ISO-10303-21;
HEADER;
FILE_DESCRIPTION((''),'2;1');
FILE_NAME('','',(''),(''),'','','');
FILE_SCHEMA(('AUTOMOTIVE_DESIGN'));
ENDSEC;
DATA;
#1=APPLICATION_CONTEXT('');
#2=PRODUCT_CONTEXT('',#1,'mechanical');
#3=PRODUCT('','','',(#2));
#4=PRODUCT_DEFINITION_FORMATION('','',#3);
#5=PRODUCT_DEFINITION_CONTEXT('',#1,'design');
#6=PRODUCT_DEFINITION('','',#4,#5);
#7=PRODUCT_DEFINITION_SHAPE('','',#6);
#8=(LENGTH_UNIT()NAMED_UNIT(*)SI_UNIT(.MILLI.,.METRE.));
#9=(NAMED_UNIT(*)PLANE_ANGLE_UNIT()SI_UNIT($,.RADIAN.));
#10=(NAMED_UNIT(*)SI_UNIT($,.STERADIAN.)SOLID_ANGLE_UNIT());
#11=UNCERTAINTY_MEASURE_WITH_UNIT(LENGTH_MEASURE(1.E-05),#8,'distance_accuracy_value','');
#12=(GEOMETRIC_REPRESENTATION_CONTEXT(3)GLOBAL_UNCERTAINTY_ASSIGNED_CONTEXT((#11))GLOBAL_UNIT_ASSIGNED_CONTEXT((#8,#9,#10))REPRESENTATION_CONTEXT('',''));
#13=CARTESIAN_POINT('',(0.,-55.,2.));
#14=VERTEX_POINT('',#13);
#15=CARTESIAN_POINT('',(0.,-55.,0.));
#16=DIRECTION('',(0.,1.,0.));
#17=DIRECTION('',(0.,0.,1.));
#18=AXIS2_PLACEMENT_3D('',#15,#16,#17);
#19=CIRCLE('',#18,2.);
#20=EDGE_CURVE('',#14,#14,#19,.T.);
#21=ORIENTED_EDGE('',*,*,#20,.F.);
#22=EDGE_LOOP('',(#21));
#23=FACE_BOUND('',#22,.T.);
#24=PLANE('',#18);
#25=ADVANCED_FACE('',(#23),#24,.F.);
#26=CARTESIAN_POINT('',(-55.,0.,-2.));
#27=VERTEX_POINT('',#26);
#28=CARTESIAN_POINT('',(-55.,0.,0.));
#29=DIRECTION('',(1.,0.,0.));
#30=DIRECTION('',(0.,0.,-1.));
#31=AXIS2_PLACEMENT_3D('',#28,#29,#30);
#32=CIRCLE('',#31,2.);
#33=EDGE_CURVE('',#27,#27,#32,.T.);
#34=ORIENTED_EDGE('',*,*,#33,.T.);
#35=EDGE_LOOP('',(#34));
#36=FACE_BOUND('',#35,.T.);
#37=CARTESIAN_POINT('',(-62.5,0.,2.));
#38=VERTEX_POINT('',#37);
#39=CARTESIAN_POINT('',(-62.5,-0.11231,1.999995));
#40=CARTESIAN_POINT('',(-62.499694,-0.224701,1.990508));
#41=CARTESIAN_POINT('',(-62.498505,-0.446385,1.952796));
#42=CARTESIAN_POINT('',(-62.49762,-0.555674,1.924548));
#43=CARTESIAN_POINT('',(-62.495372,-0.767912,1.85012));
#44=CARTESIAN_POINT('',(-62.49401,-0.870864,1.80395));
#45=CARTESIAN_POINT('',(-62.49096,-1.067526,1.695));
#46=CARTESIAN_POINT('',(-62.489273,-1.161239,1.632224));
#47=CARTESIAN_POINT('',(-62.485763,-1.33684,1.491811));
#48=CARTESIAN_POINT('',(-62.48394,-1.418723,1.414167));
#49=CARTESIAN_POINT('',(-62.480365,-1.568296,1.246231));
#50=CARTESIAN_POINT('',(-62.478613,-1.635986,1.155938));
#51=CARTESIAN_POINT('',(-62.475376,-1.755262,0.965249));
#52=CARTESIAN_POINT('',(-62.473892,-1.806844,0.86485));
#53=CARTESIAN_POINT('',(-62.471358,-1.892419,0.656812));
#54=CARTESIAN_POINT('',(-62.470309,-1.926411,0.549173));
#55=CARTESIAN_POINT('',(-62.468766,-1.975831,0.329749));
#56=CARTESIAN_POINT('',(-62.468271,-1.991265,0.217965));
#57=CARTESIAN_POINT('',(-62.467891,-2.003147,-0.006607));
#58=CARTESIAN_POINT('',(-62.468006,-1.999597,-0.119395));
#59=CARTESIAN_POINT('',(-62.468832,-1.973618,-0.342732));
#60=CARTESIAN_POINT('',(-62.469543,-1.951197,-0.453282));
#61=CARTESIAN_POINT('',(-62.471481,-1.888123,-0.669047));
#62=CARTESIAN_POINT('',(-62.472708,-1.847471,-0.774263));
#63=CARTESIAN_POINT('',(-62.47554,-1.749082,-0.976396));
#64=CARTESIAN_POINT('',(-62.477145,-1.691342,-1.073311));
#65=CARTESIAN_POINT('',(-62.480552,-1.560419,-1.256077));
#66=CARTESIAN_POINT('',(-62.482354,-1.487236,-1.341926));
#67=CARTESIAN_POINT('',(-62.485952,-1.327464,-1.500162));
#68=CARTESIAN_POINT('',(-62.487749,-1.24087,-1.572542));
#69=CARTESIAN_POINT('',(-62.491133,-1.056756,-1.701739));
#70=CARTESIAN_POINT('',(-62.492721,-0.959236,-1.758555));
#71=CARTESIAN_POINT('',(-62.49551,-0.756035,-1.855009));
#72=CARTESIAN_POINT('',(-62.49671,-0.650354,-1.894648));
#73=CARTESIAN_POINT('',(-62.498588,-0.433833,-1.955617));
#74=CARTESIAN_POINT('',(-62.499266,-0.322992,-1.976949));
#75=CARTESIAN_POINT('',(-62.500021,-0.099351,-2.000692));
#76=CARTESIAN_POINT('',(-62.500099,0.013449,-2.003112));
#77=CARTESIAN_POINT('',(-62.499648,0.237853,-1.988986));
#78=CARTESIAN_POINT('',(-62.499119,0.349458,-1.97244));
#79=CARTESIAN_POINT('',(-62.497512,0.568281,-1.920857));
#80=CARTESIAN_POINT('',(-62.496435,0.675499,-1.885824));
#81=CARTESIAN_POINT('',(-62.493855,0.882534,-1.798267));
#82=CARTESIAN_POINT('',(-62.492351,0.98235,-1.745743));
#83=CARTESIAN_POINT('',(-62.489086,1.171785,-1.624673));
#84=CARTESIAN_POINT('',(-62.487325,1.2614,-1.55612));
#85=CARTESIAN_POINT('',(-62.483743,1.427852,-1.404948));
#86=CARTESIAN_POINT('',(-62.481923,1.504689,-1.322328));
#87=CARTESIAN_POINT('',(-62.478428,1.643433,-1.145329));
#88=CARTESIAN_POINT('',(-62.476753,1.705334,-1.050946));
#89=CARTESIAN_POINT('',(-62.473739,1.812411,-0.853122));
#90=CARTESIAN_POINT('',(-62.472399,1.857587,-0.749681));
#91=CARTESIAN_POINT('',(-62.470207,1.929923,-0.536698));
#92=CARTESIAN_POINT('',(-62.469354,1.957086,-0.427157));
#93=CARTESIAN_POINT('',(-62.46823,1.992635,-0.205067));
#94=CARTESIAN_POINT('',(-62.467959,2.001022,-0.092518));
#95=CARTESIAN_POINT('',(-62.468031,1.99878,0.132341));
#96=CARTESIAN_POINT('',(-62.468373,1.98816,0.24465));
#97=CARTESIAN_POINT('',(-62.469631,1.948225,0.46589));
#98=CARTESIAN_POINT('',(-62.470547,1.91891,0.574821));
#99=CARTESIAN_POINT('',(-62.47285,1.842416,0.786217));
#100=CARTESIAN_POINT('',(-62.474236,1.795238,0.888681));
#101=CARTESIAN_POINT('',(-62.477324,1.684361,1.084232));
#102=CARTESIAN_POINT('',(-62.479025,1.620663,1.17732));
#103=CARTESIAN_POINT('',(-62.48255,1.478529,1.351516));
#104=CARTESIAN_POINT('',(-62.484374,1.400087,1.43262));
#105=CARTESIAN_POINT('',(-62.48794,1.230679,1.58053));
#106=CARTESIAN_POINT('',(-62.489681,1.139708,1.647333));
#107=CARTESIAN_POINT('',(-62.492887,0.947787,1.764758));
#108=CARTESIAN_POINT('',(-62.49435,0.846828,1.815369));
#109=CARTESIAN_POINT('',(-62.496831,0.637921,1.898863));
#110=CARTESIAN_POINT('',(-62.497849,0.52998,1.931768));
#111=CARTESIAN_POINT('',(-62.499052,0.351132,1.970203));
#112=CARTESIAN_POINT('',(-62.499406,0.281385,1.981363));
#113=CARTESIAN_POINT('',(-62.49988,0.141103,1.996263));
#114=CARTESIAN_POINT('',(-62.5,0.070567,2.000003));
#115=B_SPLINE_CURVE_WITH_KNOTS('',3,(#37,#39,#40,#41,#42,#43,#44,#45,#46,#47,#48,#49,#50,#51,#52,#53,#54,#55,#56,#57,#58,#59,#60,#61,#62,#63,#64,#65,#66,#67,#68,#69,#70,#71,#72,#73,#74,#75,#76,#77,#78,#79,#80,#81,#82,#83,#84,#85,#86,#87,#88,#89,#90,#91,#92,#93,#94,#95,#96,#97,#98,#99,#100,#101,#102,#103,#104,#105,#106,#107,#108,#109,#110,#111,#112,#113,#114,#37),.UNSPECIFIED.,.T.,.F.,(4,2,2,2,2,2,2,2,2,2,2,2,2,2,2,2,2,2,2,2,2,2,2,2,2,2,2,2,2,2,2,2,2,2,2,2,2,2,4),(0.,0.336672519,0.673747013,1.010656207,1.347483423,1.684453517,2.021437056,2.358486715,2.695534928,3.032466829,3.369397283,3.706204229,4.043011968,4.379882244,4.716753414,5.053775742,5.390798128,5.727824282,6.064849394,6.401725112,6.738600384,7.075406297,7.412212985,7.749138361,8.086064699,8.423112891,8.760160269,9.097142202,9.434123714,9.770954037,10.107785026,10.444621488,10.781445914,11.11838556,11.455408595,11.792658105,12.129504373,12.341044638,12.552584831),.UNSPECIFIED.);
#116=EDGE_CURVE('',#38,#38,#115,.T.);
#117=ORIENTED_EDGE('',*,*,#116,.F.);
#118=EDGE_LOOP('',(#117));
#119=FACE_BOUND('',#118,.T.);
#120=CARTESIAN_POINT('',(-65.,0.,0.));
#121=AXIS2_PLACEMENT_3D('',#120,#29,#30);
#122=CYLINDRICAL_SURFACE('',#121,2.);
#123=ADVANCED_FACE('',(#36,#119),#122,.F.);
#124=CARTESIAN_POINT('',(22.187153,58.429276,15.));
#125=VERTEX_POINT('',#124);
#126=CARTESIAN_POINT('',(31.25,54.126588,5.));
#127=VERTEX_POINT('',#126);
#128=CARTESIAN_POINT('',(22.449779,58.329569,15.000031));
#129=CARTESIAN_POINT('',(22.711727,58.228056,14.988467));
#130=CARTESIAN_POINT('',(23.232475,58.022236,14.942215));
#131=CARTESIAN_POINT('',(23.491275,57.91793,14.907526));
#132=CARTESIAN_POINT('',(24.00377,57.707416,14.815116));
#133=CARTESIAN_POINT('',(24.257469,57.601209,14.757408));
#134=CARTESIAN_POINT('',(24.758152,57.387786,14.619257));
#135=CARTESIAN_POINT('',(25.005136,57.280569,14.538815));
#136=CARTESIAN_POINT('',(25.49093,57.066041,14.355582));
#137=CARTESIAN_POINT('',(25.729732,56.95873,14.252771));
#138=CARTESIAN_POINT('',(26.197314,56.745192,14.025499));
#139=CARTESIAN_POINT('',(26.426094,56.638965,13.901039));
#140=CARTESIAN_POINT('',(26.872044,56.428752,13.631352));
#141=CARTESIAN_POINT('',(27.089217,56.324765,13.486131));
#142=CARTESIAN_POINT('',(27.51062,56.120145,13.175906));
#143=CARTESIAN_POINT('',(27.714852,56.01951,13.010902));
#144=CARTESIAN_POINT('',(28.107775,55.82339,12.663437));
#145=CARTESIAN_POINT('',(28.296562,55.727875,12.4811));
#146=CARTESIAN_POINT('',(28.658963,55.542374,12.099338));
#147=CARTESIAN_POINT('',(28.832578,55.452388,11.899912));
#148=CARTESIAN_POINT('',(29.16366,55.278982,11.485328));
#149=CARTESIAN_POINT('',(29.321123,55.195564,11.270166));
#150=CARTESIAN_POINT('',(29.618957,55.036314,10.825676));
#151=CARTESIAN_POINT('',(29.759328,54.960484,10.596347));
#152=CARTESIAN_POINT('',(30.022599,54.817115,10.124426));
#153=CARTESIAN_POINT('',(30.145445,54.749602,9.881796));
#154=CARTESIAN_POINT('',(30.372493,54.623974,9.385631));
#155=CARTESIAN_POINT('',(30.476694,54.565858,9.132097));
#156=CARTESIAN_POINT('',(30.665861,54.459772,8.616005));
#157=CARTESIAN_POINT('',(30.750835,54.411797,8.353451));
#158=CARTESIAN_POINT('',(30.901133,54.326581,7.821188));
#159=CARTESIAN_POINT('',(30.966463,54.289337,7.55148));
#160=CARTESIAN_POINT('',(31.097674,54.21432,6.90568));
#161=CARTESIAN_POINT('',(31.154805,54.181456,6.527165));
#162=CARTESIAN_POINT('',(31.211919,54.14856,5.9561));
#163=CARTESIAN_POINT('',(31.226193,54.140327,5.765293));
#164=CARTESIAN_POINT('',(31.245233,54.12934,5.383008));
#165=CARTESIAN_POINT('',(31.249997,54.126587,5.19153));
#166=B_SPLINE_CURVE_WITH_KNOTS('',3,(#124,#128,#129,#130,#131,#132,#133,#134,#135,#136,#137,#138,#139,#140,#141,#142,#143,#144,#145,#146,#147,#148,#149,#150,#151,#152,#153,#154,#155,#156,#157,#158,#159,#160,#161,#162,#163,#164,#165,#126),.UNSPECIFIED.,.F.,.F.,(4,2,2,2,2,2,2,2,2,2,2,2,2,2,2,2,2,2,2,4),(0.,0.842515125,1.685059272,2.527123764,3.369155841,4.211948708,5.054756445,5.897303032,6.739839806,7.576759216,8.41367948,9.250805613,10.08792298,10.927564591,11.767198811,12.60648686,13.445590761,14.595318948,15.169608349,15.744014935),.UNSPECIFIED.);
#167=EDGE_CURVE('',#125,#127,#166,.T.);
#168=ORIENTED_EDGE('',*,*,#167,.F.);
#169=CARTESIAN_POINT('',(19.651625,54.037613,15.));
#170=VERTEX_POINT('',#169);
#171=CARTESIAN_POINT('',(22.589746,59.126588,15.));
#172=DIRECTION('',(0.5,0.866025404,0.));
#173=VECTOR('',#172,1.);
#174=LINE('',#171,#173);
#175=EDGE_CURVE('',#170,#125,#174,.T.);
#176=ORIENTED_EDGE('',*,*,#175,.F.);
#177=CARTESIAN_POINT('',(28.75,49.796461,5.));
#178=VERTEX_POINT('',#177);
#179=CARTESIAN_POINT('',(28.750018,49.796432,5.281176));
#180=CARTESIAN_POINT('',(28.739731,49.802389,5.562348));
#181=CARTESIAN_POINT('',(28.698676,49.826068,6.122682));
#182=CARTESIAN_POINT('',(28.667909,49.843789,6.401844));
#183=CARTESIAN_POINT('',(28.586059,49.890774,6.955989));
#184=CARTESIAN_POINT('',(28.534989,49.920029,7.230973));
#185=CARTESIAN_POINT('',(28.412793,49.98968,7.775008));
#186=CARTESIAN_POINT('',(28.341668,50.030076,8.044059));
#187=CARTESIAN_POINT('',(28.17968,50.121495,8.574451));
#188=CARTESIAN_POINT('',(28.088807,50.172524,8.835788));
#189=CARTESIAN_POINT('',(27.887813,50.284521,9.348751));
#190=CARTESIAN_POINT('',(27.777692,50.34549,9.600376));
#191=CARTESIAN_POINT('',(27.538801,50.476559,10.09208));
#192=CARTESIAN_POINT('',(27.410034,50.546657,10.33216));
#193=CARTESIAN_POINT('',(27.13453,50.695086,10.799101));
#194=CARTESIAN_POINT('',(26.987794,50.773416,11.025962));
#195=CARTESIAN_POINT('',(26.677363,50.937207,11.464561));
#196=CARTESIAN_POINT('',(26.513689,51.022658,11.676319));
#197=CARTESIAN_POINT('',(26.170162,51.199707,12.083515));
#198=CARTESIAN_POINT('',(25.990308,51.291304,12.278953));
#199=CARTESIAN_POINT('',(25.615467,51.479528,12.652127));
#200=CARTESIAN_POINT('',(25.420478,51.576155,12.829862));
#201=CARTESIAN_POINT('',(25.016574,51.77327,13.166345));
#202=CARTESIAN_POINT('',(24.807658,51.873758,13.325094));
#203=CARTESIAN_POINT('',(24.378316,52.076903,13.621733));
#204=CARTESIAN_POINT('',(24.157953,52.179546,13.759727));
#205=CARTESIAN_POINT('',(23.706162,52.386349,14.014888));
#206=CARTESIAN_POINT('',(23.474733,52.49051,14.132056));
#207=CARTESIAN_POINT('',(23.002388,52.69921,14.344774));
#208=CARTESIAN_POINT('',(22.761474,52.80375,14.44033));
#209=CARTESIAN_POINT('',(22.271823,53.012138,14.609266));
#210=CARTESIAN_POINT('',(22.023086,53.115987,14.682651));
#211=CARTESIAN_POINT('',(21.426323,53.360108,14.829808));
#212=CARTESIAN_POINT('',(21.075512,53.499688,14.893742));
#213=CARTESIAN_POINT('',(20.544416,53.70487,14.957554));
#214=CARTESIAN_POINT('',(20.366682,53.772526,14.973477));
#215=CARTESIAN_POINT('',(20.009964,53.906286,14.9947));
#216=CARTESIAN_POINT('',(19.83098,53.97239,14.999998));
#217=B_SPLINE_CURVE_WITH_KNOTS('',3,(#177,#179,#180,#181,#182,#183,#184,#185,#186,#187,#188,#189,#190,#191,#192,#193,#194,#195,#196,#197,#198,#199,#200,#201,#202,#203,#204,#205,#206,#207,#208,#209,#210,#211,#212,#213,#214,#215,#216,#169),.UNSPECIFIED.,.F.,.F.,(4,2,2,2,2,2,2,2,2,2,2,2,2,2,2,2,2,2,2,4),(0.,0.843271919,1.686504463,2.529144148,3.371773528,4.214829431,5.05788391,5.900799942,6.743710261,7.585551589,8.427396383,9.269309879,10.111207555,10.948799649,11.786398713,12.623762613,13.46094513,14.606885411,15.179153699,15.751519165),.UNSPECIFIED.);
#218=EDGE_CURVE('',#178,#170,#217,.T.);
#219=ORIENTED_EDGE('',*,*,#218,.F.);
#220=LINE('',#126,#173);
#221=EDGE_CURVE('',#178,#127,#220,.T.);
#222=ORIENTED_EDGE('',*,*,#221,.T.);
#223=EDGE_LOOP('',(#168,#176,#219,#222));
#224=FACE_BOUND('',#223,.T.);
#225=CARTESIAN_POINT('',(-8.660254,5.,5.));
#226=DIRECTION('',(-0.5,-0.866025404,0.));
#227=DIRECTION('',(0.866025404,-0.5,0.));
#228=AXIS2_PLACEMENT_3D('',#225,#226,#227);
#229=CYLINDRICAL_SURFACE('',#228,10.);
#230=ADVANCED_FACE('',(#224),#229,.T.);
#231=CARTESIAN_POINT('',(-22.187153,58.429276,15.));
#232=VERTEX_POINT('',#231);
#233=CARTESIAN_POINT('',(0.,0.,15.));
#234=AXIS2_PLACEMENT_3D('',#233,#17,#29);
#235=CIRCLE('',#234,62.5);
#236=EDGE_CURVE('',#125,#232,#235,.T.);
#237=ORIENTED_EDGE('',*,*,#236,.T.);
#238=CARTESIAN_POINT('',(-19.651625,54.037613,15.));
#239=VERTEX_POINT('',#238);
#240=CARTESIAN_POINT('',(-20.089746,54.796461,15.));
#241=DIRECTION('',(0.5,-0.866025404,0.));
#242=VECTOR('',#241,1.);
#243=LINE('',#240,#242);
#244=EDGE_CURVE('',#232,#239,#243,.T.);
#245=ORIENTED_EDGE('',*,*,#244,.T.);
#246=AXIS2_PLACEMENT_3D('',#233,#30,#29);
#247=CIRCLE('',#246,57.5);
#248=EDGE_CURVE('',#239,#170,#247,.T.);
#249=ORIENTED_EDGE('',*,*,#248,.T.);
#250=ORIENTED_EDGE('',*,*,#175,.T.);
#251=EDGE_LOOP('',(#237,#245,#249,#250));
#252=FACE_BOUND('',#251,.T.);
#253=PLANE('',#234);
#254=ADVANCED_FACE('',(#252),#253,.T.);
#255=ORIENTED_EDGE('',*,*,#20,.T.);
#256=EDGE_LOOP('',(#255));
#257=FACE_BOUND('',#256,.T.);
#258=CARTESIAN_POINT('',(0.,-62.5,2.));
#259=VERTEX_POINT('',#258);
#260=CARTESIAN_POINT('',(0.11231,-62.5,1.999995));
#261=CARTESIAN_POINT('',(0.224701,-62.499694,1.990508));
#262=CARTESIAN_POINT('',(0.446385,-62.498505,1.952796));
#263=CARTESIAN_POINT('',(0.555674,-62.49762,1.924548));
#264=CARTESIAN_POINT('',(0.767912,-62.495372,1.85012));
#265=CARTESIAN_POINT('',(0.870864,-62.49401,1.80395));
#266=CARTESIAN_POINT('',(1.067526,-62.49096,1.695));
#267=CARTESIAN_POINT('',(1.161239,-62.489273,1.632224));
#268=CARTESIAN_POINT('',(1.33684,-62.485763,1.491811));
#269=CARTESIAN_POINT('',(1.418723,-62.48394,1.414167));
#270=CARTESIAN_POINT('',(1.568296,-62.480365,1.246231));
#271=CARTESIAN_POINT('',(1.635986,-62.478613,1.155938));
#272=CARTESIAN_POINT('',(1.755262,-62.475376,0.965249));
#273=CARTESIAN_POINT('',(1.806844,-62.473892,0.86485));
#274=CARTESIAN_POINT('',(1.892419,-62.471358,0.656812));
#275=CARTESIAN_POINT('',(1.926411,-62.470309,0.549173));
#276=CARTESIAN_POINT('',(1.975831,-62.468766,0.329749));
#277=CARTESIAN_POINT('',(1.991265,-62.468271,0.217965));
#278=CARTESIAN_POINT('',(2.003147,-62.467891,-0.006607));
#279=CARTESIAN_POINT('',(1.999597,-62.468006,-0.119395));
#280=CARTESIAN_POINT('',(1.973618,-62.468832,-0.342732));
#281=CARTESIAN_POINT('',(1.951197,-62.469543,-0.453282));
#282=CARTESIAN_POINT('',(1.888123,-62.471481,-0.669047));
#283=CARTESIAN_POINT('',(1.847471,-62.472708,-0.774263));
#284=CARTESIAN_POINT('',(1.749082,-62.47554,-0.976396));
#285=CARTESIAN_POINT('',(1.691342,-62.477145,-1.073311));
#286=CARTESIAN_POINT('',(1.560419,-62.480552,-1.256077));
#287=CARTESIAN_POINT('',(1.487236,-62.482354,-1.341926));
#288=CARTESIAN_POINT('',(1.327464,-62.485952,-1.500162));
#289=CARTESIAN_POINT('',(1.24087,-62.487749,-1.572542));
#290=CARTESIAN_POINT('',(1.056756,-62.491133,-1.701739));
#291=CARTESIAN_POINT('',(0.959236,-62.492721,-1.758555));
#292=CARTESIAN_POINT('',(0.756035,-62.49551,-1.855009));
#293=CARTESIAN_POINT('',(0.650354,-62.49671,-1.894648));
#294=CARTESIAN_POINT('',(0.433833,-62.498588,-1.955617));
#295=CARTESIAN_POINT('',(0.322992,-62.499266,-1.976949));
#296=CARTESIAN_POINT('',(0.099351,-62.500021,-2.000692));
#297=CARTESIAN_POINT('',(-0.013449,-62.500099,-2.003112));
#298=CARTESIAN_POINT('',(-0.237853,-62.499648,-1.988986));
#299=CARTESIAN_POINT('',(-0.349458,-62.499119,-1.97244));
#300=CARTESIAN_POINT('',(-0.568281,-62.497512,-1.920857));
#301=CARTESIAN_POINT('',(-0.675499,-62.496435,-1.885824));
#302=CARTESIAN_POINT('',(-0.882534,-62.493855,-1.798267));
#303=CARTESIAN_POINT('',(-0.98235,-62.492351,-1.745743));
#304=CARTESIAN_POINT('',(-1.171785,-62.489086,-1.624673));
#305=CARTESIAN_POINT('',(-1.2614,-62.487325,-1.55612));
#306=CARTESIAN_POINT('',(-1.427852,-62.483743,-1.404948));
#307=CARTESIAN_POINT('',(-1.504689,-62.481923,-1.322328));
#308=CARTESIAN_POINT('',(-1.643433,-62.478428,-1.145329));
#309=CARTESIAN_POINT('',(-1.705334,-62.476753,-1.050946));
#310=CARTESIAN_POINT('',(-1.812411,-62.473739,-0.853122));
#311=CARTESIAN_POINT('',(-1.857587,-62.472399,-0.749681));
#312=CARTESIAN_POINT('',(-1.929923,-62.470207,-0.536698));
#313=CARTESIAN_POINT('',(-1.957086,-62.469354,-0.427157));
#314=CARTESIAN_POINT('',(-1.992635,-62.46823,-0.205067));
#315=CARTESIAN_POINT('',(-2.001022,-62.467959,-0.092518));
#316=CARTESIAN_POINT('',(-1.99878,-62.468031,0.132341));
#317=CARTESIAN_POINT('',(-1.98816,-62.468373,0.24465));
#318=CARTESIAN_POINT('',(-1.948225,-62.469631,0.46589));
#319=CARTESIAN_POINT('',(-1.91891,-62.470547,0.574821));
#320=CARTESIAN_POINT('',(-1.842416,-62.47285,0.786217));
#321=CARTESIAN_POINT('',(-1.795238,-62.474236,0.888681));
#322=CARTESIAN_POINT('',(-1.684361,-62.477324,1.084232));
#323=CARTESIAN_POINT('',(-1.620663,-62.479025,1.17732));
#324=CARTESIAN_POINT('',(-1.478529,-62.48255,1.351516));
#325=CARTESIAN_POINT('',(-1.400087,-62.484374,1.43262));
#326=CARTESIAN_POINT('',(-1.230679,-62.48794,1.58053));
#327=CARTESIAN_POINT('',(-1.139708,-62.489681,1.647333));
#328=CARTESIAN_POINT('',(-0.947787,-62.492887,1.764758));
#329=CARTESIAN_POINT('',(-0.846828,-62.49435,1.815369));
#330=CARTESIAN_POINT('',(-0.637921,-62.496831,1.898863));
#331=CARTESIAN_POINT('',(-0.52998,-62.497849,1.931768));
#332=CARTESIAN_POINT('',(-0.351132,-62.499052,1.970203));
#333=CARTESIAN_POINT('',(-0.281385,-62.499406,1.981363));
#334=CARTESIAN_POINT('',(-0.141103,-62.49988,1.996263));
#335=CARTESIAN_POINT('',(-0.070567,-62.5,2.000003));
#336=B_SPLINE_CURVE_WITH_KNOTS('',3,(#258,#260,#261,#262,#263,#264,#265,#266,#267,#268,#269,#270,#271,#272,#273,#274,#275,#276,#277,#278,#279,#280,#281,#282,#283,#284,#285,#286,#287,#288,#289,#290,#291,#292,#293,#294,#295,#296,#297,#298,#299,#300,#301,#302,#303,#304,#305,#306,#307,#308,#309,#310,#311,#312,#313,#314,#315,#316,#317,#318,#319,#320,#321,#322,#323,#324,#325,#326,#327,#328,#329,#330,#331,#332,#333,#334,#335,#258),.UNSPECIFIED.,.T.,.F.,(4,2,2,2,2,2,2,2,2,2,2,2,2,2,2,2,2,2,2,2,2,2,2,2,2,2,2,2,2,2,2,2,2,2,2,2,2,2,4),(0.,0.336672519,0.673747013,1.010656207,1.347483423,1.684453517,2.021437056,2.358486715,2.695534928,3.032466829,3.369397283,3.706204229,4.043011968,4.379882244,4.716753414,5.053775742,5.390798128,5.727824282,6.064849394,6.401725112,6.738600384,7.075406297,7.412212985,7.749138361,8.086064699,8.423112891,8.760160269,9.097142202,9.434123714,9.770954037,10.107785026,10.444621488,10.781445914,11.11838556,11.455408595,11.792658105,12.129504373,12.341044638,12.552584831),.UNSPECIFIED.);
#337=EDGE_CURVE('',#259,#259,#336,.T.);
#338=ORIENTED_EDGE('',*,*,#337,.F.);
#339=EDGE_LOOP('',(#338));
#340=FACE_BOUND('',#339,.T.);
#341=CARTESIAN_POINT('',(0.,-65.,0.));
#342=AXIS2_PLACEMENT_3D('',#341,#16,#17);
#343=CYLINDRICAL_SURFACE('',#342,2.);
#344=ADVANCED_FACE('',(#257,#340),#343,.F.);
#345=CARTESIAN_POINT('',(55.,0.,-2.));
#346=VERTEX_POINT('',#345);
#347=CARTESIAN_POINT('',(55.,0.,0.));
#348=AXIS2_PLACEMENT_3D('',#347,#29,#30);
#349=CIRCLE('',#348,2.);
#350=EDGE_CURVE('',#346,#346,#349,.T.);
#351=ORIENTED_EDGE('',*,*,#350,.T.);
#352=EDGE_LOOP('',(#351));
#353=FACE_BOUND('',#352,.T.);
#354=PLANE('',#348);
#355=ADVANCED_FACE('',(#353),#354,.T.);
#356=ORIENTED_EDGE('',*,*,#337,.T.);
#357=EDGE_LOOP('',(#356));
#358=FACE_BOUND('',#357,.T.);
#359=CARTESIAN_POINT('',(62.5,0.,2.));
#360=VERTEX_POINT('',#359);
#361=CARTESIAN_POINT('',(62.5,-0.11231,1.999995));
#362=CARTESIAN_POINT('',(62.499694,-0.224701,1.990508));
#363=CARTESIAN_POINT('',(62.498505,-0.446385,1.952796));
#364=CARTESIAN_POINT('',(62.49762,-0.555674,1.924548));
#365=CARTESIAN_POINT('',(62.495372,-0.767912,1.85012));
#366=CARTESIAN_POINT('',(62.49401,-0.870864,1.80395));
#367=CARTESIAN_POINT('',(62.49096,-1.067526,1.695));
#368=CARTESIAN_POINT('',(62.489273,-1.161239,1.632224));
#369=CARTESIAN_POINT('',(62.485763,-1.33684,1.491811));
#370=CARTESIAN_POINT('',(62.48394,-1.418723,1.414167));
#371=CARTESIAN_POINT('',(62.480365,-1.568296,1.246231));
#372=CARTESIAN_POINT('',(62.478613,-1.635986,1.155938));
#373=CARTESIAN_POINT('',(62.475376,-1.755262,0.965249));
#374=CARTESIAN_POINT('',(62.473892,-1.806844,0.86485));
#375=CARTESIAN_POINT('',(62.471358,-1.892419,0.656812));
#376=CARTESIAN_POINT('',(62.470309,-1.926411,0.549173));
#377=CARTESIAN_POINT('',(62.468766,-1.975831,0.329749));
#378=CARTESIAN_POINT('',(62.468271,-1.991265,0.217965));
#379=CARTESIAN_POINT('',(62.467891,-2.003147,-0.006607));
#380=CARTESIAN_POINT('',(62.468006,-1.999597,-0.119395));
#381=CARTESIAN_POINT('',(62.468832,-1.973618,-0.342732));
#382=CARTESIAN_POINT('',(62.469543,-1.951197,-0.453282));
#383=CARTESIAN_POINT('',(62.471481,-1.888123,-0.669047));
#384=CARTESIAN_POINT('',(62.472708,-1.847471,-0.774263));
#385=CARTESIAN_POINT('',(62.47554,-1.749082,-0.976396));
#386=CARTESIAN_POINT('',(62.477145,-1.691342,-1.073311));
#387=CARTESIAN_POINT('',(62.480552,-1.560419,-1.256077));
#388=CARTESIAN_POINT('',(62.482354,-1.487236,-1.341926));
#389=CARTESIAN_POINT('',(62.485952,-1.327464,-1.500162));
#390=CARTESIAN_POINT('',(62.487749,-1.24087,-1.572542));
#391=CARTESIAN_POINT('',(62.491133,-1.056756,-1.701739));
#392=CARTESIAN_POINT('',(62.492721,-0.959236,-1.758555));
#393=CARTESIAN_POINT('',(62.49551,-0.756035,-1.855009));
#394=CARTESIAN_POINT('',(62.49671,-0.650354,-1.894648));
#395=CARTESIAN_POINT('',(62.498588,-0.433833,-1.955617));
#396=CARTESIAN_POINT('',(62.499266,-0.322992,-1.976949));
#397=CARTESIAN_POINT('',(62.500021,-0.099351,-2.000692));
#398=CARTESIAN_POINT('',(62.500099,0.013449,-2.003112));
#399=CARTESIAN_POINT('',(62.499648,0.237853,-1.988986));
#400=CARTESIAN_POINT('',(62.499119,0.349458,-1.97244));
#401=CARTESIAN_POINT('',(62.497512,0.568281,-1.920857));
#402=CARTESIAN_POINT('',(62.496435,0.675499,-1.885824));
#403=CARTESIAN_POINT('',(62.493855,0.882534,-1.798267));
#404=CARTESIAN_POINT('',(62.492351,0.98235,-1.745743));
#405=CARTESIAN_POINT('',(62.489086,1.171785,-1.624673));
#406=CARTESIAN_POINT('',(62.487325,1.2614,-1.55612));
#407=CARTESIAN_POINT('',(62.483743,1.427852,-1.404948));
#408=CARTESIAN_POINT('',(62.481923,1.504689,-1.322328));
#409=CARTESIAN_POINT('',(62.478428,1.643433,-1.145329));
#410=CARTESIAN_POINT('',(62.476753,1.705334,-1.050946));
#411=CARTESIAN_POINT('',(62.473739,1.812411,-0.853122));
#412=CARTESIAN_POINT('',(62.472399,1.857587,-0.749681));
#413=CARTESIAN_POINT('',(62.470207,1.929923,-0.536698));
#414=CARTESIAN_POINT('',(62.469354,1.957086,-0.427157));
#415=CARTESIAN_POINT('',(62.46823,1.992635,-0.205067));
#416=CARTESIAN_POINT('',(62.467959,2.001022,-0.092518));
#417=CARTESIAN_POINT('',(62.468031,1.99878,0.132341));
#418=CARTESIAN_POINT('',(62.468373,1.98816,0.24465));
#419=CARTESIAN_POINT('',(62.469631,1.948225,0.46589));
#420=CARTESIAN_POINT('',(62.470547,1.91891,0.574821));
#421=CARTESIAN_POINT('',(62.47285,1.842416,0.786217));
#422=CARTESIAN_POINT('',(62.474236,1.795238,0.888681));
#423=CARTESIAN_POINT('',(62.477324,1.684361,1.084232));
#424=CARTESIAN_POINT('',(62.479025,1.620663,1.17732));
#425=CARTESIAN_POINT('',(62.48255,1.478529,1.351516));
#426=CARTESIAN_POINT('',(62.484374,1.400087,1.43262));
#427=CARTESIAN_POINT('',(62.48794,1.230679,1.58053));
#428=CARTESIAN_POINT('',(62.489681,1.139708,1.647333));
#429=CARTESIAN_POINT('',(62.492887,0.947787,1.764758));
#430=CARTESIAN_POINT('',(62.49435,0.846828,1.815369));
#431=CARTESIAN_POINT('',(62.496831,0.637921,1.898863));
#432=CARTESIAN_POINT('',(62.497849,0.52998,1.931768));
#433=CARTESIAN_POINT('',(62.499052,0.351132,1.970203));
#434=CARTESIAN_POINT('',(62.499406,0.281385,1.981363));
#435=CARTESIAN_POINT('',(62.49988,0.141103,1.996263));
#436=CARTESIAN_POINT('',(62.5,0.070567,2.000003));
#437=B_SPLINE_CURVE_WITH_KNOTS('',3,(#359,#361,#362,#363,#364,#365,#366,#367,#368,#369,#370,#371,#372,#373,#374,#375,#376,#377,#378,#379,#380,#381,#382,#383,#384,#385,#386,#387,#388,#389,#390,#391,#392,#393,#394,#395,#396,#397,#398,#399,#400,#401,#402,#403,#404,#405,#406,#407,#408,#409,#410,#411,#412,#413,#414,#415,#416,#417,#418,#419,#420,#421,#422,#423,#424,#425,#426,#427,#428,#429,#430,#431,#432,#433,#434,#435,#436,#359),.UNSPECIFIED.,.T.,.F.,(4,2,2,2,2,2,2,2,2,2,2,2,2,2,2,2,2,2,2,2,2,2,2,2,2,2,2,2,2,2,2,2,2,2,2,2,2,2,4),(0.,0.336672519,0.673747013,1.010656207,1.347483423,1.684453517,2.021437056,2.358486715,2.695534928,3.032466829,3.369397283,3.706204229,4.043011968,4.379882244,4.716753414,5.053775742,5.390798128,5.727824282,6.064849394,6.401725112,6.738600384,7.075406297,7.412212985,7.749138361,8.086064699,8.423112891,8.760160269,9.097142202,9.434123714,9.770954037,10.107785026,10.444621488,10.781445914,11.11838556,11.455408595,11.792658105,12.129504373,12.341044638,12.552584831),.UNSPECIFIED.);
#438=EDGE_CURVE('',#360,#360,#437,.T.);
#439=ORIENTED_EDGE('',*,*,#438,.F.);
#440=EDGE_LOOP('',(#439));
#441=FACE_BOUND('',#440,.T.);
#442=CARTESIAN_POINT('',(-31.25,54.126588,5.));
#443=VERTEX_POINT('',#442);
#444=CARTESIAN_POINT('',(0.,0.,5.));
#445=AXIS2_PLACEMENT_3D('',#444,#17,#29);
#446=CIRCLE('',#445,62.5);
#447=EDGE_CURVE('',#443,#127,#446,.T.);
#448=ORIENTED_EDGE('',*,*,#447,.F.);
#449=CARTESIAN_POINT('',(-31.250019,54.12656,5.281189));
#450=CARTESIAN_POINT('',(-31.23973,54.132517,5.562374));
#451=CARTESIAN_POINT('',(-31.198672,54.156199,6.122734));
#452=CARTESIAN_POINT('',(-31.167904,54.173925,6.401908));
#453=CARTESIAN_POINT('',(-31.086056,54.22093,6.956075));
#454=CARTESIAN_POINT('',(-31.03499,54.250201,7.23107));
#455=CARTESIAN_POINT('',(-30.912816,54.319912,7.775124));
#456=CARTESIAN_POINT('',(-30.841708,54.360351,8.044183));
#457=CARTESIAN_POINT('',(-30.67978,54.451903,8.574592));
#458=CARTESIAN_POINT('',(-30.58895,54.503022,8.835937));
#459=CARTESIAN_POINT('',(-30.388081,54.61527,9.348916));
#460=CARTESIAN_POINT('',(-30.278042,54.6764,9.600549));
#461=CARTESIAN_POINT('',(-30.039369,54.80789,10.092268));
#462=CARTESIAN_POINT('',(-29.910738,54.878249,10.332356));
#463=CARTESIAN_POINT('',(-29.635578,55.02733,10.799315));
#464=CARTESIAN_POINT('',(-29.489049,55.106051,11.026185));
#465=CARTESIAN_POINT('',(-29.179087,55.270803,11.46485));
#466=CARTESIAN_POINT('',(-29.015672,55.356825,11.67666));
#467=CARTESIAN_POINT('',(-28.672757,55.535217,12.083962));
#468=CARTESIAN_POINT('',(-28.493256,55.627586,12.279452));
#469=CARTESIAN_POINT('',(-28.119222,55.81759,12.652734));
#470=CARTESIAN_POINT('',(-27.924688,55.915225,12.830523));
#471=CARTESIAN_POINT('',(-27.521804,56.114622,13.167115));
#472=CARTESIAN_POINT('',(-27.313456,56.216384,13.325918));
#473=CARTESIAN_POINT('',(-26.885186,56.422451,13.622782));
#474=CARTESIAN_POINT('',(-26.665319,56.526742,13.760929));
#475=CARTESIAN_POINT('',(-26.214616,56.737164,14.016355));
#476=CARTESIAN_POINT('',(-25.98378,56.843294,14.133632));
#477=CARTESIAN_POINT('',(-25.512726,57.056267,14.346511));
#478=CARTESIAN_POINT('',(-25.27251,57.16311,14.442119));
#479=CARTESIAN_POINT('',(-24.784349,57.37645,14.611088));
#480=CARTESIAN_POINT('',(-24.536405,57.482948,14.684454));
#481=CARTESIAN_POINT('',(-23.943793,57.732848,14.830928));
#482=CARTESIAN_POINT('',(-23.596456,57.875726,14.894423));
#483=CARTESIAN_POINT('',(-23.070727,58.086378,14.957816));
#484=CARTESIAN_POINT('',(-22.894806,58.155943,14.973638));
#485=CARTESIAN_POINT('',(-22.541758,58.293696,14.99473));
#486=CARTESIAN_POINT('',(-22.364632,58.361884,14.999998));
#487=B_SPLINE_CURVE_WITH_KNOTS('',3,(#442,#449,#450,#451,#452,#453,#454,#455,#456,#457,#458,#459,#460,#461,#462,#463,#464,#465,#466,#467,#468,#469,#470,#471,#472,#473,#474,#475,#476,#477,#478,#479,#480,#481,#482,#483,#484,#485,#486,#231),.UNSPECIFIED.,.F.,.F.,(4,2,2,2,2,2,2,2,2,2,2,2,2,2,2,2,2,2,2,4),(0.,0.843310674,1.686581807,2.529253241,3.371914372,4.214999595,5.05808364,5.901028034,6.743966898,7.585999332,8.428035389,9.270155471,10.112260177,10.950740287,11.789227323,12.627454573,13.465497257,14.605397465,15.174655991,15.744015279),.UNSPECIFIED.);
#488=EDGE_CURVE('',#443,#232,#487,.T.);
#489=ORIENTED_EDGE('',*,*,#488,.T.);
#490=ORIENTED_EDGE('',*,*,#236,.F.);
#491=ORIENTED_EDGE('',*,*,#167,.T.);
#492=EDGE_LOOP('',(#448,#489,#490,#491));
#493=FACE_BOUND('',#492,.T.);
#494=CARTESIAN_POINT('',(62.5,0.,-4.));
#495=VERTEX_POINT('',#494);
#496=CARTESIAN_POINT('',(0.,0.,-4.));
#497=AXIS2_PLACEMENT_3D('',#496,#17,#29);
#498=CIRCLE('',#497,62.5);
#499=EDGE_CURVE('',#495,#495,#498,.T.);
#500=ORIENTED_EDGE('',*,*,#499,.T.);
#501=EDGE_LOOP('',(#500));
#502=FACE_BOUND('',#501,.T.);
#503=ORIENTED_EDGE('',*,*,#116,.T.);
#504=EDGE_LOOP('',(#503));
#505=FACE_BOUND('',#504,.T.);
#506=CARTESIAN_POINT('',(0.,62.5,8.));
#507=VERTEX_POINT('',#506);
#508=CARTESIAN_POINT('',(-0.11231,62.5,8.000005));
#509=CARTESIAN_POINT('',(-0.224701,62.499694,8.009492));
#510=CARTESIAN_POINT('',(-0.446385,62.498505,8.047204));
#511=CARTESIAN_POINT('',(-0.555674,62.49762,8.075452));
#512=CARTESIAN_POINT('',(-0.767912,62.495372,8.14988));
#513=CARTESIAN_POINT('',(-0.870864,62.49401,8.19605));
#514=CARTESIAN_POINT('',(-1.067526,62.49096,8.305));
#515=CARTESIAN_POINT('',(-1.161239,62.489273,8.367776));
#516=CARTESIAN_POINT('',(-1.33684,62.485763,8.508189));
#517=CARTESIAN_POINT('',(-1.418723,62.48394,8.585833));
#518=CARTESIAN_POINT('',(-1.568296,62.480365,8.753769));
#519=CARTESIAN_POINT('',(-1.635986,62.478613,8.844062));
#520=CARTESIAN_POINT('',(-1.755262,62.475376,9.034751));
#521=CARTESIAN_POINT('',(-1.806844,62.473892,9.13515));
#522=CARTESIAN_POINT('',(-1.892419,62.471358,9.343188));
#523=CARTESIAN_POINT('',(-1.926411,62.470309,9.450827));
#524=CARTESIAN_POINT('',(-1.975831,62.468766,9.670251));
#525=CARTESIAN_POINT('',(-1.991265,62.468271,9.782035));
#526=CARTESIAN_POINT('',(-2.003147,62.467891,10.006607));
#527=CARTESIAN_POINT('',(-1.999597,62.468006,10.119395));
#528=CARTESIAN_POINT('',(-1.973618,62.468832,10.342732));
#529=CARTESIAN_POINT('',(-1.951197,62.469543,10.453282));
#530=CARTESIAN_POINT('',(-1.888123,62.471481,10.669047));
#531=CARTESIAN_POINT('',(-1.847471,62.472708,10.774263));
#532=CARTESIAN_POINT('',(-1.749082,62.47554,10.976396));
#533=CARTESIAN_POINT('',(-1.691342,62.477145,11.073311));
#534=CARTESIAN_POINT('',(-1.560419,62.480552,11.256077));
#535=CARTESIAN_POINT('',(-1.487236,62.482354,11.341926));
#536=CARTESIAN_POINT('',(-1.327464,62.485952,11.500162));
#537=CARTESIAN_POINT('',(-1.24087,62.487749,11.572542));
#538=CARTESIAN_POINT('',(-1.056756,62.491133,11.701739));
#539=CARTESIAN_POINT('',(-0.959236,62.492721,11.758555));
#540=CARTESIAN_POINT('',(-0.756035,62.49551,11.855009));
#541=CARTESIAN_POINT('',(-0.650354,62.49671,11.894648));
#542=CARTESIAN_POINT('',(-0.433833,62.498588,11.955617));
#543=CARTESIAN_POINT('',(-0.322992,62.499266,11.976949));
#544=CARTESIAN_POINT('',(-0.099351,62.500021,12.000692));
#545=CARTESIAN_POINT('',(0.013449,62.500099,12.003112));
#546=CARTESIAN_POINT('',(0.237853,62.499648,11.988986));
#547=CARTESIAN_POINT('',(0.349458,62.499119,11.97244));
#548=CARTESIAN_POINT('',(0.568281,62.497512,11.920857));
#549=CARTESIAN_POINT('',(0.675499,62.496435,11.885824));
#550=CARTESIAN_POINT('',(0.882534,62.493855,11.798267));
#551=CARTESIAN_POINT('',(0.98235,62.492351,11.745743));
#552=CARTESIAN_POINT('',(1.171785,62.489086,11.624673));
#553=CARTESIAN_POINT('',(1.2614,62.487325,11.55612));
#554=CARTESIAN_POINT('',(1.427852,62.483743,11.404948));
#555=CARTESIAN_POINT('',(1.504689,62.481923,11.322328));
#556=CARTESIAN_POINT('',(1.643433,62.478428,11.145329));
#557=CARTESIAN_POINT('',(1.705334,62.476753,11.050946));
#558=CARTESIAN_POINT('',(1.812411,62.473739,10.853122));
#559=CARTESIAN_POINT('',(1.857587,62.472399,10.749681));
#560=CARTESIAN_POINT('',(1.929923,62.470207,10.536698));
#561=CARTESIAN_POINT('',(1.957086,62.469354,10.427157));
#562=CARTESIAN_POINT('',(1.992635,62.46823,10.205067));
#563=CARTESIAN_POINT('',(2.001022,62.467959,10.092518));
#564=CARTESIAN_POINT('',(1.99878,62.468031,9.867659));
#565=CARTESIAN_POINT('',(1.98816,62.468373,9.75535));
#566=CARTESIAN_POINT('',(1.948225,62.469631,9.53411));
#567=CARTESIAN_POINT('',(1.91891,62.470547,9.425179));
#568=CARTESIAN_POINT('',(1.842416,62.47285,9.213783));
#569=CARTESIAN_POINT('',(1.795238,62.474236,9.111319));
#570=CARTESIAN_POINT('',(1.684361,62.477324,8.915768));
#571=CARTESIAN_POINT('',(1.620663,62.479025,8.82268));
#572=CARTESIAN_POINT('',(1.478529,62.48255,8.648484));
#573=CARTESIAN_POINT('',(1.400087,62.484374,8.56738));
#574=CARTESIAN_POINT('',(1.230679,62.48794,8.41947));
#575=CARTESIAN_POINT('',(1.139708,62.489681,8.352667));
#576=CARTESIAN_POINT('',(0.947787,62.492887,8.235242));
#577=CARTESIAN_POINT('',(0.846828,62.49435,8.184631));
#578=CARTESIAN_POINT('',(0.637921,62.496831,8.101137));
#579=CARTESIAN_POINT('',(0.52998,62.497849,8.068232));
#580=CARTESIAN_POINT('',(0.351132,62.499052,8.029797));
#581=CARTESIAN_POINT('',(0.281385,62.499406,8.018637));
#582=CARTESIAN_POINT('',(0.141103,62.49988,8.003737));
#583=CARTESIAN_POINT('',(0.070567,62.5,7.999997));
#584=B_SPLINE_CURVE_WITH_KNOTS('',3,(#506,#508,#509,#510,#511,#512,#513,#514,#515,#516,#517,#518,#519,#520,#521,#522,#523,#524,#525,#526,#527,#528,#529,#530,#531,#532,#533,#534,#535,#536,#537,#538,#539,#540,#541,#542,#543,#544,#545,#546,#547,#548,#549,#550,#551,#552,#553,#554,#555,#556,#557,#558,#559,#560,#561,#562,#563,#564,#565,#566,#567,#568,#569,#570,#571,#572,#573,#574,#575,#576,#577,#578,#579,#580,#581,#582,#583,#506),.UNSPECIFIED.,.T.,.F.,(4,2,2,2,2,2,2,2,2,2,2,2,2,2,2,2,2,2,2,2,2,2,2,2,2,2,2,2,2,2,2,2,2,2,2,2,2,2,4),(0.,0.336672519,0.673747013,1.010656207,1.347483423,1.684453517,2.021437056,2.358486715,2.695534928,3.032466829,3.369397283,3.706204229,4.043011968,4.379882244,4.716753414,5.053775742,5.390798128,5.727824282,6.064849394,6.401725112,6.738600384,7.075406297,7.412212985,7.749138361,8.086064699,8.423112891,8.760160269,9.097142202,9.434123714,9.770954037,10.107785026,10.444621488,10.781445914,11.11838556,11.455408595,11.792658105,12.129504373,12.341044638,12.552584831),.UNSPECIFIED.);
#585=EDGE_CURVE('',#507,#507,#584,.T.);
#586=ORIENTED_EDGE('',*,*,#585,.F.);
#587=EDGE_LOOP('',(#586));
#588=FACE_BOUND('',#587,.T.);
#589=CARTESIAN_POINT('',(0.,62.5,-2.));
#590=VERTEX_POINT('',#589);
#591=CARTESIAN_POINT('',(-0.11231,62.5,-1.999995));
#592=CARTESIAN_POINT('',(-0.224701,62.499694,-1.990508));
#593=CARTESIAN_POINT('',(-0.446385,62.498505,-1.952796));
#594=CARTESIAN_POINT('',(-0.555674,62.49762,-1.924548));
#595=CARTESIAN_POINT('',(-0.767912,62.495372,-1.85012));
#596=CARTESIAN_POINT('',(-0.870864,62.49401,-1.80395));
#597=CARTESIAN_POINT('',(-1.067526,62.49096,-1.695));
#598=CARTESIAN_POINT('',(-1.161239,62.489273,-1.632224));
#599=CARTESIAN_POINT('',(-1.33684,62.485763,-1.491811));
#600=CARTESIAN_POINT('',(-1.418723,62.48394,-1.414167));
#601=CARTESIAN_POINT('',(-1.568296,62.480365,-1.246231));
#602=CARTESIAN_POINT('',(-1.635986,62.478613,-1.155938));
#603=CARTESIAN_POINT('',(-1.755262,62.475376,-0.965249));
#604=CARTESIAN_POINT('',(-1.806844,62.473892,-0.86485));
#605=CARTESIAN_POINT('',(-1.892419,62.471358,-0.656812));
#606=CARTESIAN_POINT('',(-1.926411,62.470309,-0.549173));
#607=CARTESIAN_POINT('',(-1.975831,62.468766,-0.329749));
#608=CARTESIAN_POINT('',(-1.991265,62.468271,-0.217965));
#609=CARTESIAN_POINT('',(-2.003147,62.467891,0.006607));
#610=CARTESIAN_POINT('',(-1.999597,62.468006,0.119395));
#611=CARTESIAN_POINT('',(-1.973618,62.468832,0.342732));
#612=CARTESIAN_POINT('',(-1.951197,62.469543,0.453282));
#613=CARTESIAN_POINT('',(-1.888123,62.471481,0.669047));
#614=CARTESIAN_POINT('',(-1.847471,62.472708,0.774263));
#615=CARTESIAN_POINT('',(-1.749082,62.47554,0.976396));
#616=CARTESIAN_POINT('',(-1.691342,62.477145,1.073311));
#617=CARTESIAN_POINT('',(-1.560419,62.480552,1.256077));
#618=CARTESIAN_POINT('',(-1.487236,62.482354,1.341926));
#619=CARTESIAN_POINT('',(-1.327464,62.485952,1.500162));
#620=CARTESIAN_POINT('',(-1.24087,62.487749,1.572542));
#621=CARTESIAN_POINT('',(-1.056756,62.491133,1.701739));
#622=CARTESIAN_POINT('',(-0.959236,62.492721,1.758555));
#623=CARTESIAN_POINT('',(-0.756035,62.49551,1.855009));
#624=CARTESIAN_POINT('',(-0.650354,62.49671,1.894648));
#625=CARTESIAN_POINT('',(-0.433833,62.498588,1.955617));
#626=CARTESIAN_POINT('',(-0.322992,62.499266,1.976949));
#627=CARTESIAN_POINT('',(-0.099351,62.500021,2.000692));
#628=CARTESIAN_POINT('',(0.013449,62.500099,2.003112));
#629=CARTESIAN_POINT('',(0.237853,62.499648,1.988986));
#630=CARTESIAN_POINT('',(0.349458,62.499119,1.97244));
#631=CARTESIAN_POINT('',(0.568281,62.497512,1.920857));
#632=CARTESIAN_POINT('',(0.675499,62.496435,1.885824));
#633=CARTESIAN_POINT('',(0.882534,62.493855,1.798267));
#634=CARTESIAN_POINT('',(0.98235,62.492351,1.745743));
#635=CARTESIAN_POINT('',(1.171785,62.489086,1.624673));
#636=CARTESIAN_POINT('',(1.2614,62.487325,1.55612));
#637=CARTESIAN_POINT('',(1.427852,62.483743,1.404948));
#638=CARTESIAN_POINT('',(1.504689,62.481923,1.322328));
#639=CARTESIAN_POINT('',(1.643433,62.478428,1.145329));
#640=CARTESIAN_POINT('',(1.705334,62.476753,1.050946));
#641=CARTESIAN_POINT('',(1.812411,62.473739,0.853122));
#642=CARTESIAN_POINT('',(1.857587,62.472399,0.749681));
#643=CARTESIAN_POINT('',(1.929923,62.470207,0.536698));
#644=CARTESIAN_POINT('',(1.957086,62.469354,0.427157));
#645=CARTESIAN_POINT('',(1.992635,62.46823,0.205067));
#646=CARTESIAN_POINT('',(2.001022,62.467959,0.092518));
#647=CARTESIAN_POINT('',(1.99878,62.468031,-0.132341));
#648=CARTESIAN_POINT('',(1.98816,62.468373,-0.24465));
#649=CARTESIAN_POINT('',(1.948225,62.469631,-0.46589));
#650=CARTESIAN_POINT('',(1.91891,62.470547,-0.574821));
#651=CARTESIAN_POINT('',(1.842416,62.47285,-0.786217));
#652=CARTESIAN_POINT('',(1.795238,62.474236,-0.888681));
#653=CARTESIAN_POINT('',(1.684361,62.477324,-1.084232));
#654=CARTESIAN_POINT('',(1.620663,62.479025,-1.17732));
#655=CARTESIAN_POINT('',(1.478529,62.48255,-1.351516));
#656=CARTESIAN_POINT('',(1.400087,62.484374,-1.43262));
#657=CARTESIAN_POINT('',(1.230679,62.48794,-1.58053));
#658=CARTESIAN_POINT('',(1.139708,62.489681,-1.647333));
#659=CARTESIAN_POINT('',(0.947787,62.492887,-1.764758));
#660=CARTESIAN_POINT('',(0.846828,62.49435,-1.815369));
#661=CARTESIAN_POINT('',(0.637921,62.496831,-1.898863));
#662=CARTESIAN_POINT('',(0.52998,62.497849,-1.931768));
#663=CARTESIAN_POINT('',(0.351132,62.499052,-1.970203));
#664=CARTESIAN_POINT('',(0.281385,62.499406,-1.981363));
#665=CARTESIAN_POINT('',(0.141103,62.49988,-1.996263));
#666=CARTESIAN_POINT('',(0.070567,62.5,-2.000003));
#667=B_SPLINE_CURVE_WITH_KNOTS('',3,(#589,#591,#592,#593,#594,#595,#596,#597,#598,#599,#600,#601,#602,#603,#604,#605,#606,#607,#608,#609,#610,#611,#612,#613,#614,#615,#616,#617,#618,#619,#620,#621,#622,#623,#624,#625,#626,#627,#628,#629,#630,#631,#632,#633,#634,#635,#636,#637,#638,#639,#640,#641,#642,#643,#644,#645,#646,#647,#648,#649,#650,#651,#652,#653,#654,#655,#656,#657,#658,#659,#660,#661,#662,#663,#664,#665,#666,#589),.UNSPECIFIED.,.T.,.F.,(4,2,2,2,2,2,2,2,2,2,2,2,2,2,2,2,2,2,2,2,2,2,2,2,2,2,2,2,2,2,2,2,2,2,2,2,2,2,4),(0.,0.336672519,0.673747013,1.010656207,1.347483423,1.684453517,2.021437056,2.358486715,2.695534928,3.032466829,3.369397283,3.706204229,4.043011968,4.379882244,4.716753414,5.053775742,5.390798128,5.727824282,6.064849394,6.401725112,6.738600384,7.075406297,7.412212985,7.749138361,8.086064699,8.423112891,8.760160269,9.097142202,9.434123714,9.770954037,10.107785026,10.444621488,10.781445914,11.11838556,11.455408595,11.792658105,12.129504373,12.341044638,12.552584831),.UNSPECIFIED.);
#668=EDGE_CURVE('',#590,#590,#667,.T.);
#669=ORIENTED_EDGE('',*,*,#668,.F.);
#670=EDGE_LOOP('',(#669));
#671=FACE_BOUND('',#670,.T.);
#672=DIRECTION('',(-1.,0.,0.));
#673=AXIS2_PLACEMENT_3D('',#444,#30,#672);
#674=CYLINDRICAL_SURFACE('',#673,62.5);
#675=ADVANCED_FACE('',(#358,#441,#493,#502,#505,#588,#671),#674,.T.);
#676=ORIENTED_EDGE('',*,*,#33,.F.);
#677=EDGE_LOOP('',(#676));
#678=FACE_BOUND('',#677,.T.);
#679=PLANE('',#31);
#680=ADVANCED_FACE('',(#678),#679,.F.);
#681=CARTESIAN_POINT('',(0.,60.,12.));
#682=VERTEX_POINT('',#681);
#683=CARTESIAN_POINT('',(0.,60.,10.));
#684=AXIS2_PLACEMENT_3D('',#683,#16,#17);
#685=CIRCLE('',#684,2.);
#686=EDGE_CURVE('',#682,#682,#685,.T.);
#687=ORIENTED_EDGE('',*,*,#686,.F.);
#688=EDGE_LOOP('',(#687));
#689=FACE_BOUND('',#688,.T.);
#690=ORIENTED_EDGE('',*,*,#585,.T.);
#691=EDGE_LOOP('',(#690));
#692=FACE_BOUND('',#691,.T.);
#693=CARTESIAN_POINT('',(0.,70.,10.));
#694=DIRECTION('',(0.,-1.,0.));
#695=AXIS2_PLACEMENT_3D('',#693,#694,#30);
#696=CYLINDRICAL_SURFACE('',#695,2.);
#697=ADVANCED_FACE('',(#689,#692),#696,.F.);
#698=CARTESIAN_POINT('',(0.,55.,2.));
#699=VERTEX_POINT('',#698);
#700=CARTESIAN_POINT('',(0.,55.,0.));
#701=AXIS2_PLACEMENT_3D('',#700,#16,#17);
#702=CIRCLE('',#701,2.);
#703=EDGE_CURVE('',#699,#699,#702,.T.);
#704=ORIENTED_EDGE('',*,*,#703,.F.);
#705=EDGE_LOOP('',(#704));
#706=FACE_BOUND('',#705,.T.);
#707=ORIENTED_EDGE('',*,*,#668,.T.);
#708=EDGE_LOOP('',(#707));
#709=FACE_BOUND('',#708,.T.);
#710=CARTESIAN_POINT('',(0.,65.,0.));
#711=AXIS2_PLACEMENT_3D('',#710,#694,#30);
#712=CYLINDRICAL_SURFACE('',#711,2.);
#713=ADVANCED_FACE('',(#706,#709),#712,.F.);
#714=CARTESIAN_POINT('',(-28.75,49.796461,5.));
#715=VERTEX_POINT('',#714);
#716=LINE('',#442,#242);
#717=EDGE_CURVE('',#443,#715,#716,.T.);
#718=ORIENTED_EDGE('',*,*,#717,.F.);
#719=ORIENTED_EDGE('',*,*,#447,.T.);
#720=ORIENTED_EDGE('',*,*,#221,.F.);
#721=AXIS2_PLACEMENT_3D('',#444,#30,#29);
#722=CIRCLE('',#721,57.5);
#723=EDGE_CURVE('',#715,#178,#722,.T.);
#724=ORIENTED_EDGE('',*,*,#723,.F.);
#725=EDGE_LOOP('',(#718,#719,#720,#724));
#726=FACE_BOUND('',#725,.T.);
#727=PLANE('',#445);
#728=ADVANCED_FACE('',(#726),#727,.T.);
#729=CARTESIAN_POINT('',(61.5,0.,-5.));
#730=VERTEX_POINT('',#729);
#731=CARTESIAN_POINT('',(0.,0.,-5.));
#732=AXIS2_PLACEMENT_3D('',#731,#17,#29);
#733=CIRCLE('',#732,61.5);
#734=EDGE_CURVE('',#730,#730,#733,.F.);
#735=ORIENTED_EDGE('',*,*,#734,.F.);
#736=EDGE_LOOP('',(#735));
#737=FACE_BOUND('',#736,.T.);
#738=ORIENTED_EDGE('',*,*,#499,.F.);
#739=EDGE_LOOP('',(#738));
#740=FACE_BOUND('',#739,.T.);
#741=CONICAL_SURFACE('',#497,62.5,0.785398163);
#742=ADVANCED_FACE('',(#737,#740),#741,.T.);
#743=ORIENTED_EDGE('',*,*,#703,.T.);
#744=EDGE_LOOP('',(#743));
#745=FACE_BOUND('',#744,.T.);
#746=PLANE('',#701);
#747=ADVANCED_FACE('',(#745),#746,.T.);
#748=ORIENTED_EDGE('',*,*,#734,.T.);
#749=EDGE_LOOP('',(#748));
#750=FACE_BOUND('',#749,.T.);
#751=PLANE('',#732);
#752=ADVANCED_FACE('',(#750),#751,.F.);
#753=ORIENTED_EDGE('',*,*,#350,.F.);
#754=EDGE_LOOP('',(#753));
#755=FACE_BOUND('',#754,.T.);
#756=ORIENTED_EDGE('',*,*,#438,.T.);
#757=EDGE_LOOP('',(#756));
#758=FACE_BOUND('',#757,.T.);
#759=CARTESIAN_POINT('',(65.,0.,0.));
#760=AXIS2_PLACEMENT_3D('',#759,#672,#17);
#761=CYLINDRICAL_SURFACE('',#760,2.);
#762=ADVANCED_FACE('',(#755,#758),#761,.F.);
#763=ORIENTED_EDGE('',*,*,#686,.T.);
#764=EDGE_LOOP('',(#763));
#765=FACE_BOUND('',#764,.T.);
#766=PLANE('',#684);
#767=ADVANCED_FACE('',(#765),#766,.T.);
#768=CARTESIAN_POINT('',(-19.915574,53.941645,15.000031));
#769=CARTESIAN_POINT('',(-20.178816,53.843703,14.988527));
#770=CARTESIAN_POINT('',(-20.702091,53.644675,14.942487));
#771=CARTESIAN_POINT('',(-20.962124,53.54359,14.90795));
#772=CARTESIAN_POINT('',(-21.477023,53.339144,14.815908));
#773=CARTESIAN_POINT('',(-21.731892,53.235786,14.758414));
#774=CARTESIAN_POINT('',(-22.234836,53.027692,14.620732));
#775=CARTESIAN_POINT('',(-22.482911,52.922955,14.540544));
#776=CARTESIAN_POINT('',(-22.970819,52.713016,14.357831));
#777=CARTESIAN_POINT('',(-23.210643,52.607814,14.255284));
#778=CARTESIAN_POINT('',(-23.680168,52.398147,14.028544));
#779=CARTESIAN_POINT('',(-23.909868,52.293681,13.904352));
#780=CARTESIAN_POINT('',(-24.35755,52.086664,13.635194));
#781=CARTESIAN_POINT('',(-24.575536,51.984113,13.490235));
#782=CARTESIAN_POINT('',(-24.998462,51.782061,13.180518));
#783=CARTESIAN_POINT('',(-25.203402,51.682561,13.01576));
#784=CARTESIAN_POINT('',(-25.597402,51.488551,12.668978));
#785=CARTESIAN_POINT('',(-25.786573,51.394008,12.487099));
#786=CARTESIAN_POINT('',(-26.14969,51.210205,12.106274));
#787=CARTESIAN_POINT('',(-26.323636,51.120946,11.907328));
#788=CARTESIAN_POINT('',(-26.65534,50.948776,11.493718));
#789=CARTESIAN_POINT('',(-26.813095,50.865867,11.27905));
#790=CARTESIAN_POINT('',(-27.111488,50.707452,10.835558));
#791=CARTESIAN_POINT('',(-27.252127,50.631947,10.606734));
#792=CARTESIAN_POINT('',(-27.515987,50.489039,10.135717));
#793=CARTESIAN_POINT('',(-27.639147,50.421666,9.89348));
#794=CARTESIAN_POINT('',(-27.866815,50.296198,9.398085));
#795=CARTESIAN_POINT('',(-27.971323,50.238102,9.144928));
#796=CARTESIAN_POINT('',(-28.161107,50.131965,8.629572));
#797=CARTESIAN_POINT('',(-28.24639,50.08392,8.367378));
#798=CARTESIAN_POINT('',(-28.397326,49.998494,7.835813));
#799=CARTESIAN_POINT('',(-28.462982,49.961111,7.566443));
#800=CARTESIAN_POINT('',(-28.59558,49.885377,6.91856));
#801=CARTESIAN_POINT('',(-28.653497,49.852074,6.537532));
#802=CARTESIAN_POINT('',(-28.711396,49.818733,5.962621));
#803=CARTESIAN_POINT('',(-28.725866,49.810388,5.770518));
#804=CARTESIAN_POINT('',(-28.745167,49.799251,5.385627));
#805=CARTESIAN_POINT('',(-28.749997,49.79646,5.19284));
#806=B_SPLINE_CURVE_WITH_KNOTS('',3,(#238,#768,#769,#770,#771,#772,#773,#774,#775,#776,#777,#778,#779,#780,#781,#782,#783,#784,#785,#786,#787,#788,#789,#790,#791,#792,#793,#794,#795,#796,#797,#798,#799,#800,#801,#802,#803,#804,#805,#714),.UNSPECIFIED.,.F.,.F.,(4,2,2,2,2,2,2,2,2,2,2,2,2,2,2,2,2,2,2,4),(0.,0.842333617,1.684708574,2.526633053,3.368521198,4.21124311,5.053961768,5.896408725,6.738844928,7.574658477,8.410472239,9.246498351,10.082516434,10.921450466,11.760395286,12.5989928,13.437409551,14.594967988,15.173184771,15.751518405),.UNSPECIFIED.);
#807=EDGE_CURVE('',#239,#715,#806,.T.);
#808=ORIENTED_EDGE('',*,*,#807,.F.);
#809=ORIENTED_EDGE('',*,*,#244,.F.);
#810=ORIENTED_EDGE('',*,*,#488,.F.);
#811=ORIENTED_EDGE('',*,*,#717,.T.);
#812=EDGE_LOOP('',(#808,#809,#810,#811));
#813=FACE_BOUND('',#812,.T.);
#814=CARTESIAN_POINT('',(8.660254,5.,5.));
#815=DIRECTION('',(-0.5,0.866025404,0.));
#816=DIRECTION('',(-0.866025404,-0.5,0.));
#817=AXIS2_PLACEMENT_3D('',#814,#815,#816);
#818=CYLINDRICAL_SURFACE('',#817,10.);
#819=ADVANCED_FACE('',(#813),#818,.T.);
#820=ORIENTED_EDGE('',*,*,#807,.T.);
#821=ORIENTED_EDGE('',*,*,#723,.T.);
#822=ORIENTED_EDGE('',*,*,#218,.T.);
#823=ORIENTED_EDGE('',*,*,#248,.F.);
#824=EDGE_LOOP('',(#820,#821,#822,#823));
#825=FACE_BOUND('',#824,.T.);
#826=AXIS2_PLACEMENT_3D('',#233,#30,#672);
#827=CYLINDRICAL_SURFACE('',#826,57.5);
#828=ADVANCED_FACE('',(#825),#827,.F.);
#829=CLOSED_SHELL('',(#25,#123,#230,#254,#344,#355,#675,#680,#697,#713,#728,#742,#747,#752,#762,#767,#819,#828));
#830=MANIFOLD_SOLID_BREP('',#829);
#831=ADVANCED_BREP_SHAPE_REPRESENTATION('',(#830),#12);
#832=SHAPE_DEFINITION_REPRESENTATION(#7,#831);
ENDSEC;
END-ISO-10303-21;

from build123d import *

# Parameters (mm, degrees)
SKETCH1_R           = 62.5
BOSS_EXTRUDE1_DEPTH = 5
CUT_EXTRUDE1_START  = 55
SKETCH2_R           = 2
CUT_EXTRUDE1_DEPTH  = 10
CUT_EXTRUDE2_START  = -65
SKETCH2_2_R         = 2
CUT_EXTRUDE2_DEPTH  = 10
CUT_EXTRUDE3_START  = 55
SKETCH3_R           = 2
CUT_EXTRUDE3_DEPTH  = 10
CUT_EXTRUDE4_START  = -65
SKETCH3_2_R         = 2
CUT_EXTRUDE4_DEPTH  = 10
BOSS_EXTRUDE2_START = 10
BOSS_EXTRUDE2_DEPTH = 10
FILLET1_R           = 10
CUT_EXTRUDE5_START  = 60
SKETCH6_R           = 2
CUT_EXTRUDE5_DEPTH  = 10
CHAMFER1_SIZE       = 1


with BuildPart() as part:
    # Sketch1 → Boss-Extrude1 (new, symmetric)
    with BuildSketch(Plane.XY):
        Circle(SKETCH1_R)
    extrude(amount=BOSS_EXTRUDE1_DEPTH, both=True)

    # Sketch2 → Cut-Extrude1 (cut)
    with BuildSketch(Plane(origin=(0, 0, 0), x_dir=(1, 0, 0), z_dir=(0, 1, 0)).offset(CUT_EXTRUDE1_START)):
        with Locations(Location((0, 0, 0), (0, 0, 90))):
            Circle(SKETCH2_R)
    extrude(amount=CUT_EXTRUDE1_DEPTH, mode=Mode.SUBTRACT)

    # Sketch2<2> → Cut-Extrude2 (cut)
    with BuildSketch(Plane(origin=(0, 0, 0), x_dir=(1, 0, 0), z_dir=(0, 1, 0)).offset(CUT_EXTRUDE2_START)):
        with Locations(Location((0, 0, 0), (0, 0, 90))):
            Circle(SKETCH2_2_R)
    extrude(amount=CUT_EXTRUDE2_DEPTH, mode=Mode.SUBTRACT)

    # Sketch3 → Cut-Extrude3 (cut)
    with BuildSketch(Plane(origin=(0, 0, 0), x_dir=(0, 0, -1), z_dir=(1, 0, 0)).offset(CUT_EXTRUDE3_START)):
        Circle(SKETCH3_R)
    extrude(amount=CUT_EXTRUDE3_DEPTH, mode=Mode.SUBTRACT)

    # Sketch3<2> → Cut-Extrude4 (cut)
    with BuildSketch(Plane(origin=(0, 0, 0), x_dir=(0, 0, -1), z_dir=(1, 0, 0)).offset(CUT_EXTRUDE4_START)):
        Circle(SKETCH3_2_R)
    extrude(amount=CUT_EXTRUDE4_DEPTH, mode=Mode.SUBTRACT)

    # Sketch4 → Boss-Extrude2 (add)
    with BuildSketch(Plane.XY.offset(5).offset(BOSS_EXTRUDE2_START)):
        with BuildLine():
            Line((-31.25, 54.126587737), (-28.75, 49.796460718))
            ThreePointArc((-28.75, 49.796460718), (0, 57.5), (28.75, 49.796460718))
            Line((28.75, 49.796460718), (31.25, 54.126587737))
            ThreePointArc((31.25, 54.126587737), (0, 62.5), (-31.25, 54.126587737))
        make_face()
    extrude(amount=-BOSS_EXTRUDE2_DEPTH)

    # Fillet1
    fillet1_edges = [part.edges().sort_by_distance(p)[0] for p in [
        (-30, 51.961524227, 15),
        (30, 51.961524227, 15),
    ]]
    fillet(fillet1_edges, radius=FILLET1_R - 0.0001)  # a hair under: the kernel refuses the full size

    # Sketch6 → Cut-Extrude5 (cut)
    with BuildSketch(Plane(origin=(0, 0, 0), x_dir=(1, 0, 0), z_dir=(0, 1, 0)).offset(CUT_EXTRUDE5_START)):
        with Locations(Location((0, -10, 0), (0, 0, 90))):
            Circle(SKETCH6_R)
    extrude(amount=CUT_EXTRUDE5_DEPTH, mode=Mode.SUBTRACT)

    # Chamfer1
    chamfer1_edges = [part.edges().sort_by_distance(p)[0] for p in [
        (-62.5, 0, -5),
    ]]
    chamfer(chamfer1_edges, length=CHAMFER1_SIZE)


solid = part.part
